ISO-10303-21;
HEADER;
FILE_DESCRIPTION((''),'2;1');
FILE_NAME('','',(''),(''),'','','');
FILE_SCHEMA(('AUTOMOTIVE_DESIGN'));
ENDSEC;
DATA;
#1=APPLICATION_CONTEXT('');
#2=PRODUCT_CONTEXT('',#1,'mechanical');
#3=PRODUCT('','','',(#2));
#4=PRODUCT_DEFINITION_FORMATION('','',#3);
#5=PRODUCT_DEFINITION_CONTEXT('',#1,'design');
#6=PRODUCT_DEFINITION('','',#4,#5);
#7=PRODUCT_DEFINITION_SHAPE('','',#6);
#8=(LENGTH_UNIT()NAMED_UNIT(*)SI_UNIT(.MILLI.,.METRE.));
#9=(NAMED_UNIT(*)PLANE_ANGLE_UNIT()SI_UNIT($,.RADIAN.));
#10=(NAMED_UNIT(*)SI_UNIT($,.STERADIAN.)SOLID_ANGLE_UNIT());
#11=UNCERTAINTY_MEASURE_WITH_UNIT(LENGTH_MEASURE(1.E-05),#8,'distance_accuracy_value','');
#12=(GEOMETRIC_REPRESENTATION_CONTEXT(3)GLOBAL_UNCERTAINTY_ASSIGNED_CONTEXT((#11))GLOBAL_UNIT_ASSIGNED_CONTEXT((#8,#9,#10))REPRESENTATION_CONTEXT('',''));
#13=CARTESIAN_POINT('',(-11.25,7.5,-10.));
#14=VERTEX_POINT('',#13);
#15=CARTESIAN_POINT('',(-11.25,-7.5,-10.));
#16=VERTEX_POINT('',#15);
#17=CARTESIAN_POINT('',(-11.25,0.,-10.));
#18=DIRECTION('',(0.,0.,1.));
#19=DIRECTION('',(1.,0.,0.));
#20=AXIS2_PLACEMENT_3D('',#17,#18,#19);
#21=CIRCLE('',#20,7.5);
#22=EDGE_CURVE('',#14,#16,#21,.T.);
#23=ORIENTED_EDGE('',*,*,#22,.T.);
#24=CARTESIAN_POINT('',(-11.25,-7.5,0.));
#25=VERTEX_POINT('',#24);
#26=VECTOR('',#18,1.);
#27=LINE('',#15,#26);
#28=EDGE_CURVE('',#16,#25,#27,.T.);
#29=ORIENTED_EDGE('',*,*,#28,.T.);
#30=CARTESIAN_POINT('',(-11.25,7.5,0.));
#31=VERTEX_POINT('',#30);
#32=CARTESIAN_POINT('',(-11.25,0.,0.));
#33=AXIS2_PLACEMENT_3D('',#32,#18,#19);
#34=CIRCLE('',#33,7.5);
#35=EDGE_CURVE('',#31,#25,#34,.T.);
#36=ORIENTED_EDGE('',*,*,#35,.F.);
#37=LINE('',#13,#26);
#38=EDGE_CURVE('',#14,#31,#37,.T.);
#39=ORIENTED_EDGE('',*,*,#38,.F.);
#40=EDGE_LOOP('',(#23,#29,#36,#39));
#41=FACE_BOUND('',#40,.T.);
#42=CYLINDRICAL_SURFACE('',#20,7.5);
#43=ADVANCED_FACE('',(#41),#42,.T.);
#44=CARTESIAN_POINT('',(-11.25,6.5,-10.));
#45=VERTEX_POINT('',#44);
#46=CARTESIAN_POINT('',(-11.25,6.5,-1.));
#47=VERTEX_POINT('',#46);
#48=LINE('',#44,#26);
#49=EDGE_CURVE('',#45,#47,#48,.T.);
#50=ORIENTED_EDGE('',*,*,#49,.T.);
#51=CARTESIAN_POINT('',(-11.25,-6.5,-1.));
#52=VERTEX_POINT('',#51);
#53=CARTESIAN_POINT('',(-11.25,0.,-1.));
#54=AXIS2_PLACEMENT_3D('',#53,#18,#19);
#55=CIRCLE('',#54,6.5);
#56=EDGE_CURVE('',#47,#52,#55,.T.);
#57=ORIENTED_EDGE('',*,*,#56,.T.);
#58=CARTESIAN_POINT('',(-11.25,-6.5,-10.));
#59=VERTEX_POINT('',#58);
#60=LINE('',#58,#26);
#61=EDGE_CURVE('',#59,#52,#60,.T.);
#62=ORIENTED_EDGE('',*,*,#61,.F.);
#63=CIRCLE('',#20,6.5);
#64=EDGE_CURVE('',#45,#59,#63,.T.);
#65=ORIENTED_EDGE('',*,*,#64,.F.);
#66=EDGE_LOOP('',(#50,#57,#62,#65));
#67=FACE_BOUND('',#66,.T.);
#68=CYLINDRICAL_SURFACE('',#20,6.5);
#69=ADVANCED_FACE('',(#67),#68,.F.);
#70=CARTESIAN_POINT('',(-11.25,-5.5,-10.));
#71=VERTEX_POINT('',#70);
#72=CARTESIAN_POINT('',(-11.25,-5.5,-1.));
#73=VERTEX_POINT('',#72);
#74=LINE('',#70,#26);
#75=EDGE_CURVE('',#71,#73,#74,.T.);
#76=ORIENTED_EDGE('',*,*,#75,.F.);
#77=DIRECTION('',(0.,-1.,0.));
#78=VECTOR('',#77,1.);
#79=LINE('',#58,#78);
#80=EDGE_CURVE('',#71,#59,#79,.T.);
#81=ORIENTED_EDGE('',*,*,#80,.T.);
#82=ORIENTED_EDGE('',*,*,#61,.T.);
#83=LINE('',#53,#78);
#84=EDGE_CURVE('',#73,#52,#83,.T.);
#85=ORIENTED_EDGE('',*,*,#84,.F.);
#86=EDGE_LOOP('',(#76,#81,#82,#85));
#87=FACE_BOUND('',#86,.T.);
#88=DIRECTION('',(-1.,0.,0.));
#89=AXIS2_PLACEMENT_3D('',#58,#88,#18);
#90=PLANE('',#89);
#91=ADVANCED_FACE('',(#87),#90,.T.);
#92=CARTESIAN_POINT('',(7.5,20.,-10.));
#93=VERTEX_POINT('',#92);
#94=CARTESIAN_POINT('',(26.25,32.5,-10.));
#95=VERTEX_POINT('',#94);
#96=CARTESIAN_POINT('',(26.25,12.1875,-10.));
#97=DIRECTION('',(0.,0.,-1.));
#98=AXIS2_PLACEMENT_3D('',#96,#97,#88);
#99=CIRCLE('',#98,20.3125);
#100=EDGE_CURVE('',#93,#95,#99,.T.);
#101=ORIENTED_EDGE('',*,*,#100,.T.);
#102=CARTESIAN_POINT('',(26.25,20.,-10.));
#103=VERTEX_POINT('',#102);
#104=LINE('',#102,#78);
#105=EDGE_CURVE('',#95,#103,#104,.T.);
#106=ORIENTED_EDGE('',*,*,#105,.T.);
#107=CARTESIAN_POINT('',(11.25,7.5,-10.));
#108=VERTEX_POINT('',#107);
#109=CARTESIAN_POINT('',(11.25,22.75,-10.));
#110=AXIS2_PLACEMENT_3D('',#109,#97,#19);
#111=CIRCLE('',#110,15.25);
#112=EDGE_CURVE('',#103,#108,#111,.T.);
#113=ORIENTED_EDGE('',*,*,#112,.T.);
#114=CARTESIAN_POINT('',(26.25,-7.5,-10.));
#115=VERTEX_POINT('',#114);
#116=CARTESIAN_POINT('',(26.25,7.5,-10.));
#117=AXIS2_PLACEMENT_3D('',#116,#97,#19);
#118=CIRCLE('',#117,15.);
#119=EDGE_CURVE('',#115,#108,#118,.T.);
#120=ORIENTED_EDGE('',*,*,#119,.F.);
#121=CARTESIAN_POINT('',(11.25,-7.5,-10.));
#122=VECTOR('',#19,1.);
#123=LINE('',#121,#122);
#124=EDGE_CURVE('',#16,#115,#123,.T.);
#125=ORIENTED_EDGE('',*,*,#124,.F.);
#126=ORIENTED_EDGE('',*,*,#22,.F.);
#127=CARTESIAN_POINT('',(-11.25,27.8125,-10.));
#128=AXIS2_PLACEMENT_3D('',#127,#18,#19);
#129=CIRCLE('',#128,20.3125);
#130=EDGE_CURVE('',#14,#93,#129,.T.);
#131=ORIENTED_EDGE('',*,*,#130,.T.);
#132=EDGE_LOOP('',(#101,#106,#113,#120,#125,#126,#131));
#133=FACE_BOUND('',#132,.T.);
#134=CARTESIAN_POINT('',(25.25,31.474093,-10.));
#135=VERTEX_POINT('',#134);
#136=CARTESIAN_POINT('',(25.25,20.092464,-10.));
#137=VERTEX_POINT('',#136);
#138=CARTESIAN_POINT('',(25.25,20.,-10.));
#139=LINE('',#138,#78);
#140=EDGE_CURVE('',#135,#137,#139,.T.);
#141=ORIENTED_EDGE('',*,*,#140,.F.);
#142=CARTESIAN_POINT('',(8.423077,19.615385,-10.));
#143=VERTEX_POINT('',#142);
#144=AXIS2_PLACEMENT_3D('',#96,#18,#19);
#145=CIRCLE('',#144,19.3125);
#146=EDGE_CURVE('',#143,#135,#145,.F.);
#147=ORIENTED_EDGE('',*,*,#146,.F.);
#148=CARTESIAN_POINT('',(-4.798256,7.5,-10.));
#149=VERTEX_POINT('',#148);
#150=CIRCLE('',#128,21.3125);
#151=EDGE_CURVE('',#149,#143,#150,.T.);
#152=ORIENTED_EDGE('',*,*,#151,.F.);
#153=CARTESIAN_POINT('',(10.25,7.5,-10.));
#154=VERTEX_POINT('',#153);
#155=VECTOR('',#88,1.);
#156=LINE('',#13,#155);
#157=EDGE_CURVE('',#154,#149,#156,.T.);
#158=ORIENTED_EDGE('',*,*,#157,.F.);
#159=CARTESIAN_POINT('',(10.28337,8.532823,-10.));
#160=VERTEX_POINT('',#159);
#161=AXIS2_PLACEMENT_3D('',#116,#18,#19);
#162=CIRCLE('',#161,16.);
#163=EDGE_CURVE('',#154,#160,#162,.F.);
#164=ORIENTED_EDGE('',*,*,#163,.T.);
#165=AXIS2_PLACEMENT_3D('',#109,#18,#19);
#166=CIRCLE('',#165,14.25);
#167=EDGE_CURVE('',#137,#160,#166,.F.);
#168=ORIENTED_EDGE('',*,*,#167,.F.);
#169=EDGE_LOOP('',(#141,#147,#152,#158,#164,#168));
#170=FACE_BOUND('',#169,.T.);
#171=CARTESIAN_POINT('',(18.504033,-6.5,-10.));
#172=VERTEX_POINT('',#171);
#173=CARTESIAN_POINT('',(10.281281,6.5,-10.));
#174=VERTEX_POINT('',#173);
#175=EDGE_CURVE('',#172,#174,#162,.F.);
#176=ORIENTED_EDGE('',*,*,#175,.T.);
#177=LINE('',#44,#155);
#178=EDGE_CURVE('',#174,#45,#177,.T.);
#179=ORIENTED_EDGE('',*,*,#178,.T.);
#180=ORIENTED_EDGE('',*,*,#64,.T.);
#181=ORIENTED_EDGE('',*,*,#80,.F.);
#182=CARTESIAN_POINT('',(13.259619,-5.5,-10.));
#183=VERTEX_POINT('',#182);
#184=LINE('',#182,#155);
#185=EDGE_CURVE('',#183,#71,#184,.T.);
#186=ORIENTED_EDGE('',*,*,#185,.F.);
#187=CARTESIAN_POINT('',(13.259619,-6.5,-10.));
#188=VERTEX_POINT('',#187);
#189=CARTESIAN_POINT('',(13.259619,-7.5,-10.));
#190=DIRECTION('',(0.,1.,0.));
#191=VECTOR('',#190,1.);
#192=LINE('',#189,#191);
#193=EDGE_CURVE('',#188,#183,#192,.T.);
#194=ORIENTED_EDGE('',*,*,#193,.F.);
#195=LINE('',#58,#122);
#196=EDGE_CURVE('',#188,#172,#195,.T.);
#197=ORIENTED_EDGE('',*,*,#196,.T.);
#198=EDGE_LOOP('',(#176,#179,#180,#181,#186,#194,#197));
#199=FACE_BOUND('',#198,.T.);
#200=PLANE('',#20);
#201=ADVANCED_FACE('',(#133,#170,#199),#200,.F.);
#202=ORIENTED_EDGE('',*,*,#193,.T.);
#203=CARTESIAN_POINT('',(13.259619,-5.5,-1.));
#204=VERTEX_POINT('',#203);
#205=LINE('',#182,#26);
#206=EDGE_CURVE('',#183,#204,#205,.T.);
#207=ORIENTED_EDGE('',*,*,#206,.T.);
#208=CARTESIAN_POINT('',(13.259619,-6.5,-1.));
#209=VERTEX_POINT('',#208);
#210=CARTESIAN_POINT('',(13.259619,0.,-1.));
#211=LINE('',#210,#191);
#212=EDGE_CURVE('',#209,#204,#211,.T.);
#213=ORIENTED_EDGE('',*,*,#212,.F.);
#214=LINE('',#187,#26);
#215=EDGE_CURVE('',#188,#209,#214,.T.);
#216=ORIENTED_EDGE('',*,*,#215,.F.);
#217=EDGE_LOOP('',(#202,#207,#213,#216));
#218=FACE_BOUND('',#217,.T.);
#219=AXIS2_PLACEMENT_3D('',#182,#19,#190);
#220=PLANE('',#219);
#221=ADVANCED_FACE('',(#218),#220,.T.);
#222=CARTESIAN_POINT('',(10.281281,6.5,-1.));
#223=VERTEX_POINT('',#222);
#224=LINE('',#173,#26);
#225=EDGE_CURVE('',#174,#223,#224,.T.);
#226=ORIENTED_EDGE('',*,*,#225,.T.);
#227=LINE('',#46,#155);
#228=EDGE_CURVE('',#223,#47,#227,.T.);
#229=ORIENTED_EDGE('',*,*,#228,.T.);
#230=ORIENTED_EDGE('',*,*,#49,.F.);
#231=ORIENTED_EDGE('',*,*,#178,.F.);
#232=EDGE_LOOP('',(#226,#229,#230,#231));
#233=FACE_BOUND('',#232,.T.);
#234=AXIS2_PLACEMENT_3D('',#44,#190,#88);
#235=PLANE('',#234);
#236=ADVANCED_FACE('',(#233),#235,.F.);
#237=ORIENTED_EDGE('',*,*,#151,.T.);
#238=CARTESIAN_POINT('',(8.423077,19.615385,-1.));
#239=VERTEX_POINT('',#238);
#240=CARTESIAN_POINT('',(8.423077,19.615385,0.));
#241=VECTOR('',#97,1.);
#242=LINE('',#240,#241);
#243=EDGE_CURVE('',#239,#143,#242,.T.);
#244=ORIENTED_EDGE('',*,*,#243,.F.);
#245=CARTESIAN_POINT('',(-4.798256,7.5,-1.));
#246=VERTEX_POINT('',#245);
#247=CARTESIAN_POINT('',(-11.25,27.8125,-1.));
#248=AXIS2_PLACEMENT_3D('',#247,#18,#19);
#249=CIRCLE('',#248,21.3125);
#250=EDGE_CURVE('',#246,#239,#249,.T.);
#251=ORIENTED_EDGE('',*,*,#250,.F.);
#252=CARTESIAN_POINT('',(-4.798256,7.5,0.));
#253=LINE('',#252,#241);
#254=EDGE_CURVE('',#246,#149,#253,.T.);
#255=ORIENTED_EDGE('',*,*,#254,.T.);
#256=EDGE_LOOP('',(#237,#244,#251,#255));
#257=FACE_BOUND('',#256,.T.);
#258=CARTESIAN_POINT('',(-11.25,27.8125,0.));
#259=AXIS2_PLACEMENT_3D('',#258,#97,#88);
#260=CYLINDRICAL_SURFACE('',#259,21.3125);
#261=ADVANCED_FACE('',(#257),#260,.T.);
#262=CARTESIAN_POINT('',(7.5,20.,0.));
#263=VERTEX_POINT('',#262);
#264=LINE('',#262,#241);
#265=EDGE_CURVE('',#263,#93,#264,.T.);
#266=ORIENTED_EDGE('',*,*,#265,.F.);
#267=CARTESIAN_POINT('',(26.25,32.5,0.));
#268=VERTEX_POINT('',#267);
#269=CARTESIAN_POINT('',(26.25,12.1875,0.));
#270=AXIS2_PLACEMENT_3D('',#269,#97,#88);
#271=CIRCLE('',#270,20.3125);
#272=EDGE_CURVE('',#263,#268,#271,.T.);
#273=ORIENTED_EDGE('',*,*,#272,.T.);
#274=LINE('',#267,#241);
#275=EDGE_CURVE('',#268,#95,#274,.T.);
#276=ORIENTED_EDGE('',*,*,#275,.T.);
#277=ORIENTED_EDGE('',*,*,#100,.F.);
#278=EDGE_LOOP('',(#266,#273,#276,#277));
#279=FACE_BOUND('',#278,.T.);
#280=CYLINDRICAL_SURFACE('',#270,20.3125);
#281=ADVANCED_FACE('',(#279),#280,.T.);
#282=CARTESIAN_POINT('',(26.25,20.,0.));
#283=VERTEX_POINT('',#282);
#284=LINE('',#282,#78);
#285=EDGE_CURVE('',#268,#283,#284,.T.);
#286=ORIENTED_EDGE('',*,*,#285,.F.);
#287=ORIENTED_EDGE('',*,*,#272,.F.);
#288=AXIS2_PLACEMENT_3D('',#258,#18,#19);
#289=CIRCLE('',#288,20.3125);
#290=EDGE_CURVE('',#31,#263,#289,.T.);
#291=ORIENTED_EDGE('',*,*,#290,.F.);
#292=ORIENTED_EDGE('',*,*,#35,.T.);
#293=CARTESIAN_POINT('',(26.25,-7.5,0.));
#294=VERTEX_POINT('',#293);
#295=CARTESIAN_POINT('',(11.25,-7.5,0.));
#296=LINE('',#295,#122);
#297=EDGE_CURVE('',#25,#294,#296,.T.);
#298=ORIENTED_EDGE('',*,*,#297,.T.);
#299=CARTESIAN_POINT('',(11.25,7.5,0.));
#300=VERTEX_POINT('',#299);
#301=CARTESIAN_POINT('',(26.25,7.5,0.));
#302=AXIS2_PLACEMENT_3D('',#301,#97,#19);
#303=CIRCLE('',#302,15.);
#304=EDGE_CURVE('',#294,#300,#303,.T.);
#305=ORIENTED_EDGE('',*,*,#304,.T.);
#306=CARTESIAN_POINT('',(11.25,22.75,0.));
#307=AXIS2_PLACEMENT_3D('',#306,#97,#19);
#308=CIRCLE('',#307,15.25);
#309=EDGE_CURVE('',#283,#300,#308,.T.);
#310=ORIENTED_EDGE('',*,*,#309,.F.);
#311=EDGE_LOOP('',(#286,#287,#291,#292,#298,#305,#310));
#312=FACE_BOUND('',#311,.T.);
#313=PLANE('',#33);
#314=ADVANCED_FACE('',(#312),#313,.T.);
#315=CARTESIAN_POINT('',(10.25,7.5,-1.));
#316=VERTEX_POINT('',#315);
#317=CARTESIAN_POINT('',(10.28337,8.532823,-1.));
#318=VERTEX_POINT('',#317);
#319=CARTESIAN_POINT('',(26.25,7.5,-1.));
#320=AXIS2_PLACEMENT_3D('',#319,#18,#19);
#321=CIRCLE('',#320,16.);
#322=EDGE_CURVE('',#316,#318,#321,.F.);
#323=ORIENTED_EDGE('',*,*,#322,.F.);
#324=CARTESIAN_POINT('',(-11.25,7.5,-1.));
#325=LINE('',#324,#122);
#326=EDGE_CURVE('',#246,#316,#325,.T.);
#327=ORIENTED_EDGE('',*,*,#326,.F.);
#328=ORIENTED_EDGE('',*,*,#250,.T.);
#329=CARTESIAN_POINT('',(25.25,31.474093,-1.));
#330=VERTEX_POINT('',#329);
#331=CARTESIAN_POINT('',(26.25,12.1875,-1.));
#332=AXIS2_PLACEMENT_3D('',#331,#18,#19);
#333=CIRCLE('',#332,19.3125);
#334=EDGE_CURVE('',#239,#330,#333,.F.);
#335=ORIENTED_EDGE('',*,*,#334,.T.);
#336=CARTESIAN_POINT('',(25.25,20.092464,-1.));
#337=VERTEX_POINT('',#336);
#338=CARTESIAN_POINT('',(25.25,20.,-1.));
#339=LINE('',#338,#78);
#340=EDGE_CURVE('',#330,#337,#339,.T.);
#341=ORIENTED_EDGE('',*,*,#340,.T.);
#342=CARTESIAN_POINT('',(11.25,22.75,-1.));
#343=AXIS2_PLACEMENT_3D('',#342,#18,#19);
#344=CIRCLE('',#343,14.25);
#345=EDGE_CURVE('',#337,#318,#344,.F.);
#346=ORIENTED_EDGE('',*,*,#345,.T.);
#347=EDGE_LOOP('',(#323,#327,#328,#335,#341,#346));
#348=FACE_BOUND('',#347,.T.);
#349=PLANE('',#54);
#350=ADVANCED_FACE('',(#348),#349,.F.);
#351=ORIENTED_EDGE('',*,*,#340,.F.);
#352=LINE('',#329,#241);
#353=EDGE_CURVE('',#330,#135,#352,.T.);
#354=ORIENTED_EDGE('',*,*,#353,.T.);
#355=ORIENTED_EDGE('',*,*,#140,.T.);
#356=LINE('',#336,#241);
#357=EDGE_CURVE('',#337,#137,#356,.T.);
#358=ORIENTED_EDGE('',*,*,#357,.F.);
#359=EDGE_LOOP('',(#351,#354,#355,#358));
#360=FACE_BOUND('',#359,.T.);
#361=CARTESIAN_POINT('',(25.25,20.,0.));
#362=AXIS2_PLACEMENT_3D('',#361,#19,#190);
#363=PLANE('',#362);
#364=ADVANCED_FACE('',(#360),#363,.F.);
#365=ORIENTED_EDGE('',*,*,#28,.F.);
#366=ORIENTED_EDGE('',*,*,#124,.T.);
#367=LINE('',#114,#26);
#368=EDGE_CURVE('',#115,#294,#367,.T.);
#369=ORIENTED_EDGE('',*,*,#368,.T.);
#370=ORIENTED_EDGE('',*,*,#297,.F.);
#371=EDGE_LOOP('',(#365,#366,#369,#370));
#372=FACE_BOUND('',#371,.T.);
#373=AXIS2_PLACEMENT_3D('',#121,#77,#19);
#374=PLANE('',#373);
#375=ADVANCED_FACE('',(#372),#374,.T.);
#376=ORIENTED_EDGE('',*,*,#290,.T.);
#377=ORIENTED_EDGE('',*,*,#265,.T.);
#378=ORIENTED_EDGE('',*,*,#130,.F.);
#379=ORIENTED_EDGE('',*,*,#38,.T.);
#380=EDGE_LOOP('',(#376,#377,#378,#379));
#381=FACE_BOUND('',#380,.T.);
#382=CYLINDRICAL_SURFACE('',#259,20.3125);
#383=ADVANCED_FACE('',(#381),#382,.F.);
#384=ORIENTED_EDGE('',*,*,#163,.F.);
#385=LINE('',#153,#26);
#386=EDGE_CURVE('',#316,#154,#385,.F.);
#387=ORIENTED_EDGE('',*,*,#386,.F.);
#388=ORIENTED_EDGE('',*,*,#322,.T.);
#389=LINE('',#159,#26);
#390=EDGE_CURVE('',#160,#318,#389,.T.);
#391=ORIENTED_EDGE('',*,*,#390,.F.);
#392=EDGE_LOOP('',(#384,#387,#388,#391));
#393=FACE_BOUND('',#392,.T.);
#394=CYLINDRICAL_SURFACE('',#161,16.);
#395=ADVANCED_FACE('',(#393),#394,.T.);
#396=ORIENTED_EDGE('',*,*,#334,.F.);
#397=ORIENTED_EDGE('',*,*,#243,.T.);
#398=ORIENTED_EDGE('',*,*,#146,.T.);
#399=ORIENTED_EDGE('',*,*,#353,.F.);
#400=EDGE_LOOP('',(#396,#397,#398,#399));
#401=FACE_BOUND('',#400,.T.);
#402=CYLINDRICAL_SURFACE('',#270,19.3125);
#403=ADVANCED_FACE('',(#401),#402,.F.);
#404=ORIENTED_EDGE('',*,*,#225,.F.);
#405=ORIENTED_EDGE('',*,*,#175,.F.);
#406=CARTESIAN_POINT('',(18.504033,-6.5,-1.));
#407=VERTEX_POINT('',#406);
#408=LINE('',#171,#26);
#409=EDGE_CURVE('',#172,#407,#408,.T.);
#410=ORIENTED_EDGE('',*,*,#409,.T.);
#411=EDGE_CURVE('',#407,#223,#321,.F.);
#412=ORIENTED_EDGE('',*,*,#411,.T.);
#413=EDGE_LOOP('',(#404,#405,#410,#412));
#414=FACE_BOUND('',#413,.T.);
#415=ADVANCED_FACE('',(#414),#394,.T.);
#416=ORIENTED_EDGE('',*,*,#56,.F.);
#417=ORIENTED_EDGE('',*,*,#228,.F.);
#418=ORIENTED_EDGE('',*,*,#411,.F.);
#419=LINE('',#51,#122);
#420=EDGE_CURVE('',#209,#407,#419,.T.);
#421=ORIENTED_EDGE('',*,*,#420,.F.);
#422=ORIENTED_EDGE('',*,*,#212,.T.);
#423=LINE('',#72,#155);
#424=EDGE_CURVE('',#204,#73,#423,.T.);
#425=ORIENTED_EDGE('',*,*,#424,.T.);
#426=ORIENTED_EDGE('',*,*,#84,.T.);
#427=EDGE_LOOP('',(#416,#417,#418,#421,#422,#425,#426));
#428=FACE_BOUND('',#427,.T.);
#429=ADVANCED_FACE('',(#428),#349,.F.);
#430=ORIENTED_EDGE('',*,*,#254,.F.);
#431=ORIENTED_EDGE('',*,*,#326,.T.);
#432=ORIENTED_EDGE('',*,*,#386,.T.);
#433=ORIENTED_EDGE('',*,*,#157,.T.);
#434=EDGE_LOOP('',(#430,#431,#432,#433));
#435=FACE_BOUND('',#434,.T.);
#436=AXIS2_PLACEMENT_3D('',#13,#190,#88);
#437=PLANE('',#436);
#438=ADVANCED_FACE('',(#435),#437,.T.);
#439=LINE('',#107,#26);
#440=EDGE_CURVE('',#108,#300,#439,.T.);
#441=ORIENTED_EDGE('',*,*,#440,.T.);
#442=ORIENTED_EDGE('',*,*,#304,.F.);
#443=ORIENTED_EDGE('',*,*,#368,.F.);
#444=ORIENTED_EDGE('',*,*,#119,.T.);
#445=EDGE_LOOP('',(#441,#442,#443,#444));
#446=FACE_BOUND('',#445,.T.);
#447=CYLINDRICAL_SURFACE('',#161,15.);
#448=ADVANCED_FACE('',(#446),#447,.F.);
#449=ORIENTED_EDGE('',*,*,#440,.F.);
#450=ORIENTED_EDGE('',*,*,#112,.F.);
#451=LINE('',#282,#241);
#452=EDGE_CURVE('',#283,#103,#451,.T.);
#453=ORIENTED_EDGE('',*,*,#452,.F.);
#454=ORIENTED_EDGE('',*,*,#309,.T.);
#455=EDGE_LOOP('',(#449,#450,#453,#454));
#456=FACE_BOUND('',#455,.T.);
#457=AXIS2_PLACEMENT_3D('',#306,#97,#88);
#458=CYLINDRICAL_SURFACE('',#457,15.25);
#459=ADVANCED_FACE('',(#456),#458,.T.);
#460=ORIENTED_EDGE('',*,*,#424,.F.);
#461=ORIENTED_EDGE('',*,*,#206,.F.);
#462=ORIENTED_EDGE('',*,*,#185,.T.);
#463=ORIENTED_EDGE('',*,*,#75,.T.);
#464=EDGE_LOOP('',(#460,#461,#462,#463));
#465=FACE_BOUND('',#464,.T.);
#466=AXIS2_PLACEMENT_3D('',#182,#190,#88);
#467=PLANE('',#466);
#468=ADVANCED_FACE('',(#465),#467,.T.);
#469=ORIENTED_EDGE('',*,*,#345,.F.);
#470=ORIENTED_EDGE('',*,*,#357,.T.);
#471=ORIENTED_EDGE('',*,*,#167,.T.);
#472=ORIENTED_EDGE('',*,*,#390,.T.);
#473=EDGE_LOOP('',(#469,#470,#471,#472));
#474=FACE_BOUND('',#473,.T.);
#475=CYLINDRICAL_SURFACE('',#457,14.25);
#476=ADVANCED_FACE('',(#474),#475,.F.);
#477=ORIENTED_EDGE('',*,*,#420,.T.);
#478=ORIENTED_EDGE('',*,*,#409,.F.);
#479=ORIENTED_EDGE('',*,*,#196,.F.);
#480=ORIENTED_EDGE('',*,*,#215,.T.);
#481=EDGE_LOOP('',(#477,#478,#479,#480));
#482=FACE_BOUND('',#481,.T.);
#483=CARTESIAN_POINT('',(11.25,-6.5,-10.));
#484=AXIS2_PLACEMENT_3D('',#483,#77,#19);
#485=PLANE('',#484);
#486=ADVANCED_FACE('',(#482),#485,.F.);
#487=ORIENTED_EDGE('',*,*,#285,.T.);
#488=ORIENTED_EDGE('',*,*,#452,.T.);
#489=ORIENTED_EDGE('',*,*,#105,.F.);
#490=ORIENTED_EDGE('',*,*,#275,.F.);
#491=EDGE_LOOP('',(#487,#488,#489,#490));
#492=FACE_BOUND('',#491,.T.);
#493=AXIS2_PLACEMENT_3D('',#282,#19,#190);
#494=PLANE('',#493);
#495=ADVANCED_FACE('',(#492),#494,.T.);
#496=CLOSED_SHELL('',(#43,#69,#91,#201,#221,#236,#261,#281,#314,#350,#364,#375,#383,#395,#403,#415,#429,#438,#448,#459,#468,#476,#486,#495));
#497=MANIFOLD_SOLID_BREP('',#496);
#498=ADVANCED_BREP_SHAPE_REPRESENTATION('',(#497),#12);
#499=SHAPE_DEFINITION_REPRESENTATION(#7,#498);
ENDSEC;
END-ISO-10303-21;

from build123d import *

# Parameters (mm, degrees)
BOSS_EXTRUDE1_DEPTH = 10
SHELL1_T            = -1
BOSS_EXTRUDE2_DEPTH = 10
BOSS_EXTRUDE3_DEPTH = 10
SHELL3_START        = -10
SHELL3_DEPTH        = 9


# Read off the part's stored shape, not the designer's step: Shell3
with BuildPart() as part:
    # Sketch2 → Boss-Extrude1 (new body)
    with BuildSketch(Plane.XY):
        with BuildLine():
            Line((-11.25, 7.5), (11.25, 7.5))
            ThreePointArc((11.25, 7.5), (15.643398282, -3.106601718), (26.25, -7.5))
            Line((26.25, -7.5), (11.25, -7.5))
            Line((11.25, -7.5), (-11.25, -7.5))
            ThreePointArc((-11.25, -7.5), (-18.75, 0), (-11.25, 7.5))
        make_face()
    extrude(amount=-BOSS_EXTRUDE1_DEPTH)

    # Shell1
    shell1_openings = [part.faces().sort_by_distance(p)[0] for p in [
        (-1.202754878, -0.422571934, -10),
    ]]
    offset(amount=SHELL1_T, openings=shell1_openings, kind=Kind.INTERSECTION)

    # Sketch3 → Boss-Extrude2 (add)
    with BuildSketch(Plane.XY):
        Polygon((13.259618943, -5.5), (-11.25, -5.5), (-11.25, -6.5), (-11.25, -7.5), (13.259618943, -7.5), (13.259618943, -6.56903326), align=None)
    extrude(amount=-BOSS_EXTRUDE2_DEPTH)

    # Sketch6 → Boss-Extrude3 (add)
    with BuildSketch(Plane(origin=(0, 0, -10), x_dir=(-1, 0, 0), z_dir=(0, 0, -1))):
        with BuildLine():
            Line((-26.25, 20), (-26.25, 32.5))
            ThreePointArc((-26.25, 32.5), (-14.982652264, 29.088521604), (-7.5, 20))
            ThreePointArc((-7.5, 20), (-0.017347736, 10.911478396), (11.25, 7.5))
            Line((11.25, 7.5), (-11.25, 7.5))
            ThreePointArc((-11.25, 7.5), (-21.012812095, 11.034625486), (-26.25, 20))
        make_face()
    extrude(amount=-BOSS_EXTRUDE3_DEPTH)

    # Shell3 outline → Shell3 (cut)
    with BuildSketch(Plane.XY.offset(SHELL3_START)):
        with BuildLine():
            ThreePointArc((10.25, 7.5), (10.258344649, 8.016680893), (10.283369893, 8.532822846))
            ThreePointArc((10.283369893, 8.532822846), (19.960539936, 11.472190194), (25.25, 20.092463547))
            Line((25.25, 20.092463547), (25.25, 31.474092655))
            ThreePointArc((25.25, 31.474092655), (15.124781026, 27.973638192), (8.423076923, 19.615384615))
            ThreePointArc((8.423076923, 19.615384615), (3.148687527, 12.099433662), (-4.79825605, 7.5))
            Line((-4.79825605, 7.5), (10.25, 7.5))
        make_face()
    extrude(amount=SHELL3_DEPTH, mode=Mode.SUBTRACT)


solid = part.part
